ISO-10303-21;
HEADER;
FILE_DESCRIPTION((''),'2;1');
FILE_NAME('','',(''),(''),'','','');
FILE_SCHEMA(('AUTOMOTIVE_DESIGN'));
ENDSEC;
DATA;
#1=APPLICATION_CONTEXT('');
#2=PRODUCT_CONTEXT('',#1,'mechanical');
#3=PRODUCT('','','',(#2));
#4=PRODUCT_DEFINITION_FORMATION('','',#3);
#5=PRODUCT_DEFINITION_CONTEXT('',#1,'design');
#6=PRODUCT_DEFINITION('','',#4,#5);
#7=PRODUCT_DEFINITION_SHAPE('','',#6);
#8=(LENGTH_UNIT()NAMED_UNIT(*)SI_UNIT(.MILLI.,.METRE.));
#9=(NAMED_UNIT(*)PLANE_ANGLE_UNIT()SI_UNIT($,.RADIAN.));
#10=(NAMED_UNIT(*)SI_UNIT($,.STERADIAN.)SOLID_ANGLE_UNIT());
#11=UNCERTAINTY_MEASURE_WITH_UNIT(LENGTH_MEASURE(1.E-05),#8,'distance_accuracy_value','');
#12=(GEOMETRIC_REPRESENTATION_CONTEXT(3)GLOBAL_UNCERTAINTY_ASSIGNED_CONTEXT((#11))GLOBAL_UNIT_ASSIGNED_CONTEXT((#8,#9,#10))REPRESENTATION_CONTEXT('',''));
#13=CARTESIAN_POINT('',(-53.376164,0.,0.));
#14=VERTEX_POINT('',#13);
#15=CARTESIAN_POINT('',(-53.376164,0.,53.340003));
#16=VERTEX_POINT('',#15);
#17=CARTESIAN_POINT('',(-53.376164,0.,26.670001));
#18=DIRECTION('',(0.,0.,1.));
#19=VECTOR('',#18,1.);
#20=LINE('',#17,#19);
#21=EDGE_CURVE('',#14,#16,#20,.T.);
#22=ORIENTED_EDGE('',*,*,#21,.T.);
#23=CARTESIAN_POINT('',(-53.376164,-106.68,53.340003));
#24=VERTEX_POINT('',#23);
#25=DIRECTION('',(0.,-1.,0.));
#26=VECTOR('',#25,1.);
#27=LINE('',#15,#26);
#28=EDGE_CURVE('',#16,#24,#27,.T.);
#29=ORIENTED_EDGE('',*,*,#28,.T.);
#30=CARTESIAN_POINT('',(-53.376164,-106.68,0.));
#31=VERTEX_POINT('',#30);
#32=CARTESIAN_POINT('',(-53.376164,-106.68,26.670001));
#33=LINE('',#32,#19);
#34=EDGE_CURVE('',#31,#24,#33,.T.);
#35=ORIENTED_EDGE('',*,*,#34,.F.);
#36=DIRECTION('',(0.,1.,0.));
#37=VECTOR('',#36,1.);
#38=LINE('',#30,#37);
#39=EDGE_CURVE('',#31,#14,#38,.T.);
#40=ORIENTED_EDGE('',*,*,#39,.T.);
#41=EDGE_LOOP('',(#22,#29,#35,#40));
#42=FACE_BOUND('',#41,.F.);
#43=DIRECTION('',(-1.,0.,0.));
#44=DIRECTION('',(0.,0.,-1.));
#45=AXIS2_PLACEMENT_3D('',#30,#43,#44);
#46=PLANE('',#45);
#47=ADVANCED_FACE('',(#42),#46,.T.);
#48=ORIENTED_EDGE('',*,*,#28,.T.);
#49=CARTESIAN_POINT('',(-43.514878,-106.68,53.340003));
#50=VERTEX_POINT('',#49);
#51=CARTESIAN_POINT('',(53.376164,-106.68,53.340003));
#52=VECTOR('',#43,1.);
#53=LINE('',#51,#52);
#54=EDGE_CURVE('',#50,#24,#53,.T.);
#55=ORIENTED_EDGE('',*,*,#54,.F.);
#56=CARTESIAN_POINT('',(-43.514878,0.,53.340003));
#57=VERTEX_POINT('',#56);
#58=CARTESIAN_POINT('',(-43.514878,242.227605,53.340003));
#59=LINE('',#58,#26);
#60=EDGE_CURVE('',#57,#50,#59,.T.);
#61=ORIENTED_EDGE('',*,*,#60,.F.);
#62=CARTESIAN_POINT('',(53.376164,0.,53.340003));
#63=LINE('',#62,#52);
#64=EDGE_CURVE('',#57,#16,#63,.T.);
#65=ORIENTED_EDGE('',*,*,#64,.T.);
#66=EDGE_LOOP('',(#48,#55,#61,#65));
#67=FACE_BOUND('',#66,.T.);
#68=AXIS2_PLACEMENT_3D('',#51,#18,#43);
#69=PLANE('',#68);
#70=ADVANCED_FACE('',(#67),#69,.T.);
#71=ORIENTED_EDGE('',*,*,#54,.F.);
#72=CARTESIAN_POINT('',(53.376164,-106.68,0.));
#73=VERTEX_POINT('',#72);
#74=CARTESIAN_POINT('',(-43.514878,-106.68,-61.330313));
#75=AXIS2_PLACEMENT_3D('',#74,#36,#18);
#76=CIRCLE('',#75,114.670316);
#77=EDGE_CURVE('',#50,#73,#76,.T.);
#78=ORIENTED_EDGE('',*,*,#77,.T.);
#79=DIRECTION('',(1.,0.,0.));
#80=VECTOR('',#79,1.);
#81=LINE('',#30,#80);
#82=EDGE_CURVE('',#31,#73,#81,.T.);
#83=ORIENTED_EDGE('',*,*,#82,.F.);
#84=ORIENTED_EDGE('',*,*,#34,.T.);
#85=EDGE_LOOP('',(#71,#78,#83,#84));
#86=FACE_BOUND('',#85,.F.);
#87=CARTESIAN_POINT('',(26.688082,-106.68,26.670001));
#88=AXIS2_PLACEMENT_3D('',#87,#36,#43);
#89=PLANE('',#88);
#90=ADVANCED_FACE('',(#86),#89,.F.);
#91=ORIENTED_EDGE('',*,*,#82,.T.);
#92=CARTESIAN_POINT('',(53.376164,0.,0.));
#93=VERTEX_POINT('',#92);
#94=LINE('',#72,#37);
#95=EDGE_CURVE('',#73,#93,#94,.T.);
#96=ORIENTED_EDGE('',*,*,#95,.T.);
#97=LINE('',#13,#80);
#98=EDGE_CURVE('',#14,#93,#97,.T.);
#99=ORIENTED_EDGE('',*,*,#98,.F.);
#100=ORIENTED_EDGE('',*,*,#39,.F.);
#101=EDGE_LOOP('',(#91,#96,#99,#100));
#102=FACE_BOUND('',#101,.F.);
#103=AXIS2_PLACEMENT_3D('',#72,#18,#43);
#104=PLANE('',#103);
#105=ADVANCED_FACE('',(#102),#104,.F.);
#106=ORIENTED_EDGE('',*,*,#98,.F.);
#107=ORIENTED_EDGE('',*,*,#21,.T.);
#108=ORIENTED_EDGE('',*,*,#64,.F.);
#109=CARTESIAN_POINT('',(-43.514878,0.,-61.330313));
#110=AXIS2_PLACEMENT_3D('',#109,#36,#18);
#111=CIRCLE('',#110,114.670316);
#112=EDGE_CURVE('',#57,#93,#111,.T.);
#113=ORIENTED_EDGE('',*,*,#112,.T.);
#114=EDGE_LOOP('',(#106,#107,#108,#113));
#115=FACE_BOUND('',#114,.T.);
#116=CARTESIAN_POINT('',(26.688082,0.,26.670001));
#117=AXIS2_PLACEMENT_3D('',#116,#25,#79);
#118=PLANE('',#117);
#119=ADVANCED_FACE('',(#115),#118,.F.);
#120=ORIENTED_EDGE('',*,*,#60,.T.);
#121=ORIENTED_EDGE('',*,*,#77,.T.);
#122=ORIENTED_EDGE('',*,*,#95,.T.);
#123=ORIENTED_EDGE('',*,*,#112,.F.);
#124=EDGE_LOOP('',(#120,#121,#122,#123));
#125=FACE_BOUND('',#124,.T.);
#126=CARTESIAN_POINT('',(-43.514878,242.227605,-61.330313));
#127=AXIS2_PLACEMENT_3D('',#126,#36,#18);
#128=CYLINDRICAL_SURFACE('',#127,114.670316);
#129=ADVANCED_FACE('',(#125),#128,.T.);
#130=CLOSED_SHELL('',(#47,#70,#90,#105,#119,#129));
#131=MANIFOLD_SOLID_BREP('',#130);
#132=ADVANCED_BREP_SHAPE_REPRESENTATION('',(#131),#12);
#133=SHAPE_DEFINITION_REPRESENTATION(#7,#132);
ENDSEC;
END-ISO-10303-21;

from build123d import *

# Parameters (mm, degrees)
F0_W        = 53.3761642873
F0_H        = 53.3400028944
F1_DEPTH    = 53.34
F4_T1_DEPTH = 591.1352105984


# Not quite as in the source:
# - a fillet or chamfer that OpenCascade refuses, or shapes differently, is made with other operations: its cross-section is extruded or revolved along the edge and cut away or added


with BuildPart() as f1:
    # F0 (on Front) → F1 (new body)
    with BuildSketch(Plane.XZ):
        with Locations((-26.6880821437, 26.6700014472)):
            Rectangle(F0_W, F0_H)
    extrude(amount=F1_DEPTH)

    # F2: F1 across plane


with BuildPart() as f1_1:
    add(f1.part)
    add(f1.part.mirror(Plane.YZ))

    # F3: F1 across face


with BuildPart() as f1_2:
    add(f1_1.part)
    add(f1_1.part.mirror(Plane(origin=(0, -53.34, 26.6700014472), x_dir=(1, 0, 0), z_dir=(0, -1, 0))))

    # F4: fillet of radius 114.6703157856 on 1 edges, made by hand

    # F4_s2 → F4_t1 (cut)
    with BuildSketch(Plane.XZ.offset(-242.2276052992)):
        with BuildLine():
            ThreePointArc((-43.5148778323, 53.3400028944), (11.7866365045, 39.1237753005), (53.3761642873, 0))
            Line((53.3761642873, 0), (53.3761642873, 53.3400028944))
            Line((53.3761642873, 53.3400028944), (-43.5148778323, 53.3400028944))
        make_face()
    extrude(amount=F4_T1_DEPTH, mode=Mode.SUBTRACT)


solid = f1_2.part
